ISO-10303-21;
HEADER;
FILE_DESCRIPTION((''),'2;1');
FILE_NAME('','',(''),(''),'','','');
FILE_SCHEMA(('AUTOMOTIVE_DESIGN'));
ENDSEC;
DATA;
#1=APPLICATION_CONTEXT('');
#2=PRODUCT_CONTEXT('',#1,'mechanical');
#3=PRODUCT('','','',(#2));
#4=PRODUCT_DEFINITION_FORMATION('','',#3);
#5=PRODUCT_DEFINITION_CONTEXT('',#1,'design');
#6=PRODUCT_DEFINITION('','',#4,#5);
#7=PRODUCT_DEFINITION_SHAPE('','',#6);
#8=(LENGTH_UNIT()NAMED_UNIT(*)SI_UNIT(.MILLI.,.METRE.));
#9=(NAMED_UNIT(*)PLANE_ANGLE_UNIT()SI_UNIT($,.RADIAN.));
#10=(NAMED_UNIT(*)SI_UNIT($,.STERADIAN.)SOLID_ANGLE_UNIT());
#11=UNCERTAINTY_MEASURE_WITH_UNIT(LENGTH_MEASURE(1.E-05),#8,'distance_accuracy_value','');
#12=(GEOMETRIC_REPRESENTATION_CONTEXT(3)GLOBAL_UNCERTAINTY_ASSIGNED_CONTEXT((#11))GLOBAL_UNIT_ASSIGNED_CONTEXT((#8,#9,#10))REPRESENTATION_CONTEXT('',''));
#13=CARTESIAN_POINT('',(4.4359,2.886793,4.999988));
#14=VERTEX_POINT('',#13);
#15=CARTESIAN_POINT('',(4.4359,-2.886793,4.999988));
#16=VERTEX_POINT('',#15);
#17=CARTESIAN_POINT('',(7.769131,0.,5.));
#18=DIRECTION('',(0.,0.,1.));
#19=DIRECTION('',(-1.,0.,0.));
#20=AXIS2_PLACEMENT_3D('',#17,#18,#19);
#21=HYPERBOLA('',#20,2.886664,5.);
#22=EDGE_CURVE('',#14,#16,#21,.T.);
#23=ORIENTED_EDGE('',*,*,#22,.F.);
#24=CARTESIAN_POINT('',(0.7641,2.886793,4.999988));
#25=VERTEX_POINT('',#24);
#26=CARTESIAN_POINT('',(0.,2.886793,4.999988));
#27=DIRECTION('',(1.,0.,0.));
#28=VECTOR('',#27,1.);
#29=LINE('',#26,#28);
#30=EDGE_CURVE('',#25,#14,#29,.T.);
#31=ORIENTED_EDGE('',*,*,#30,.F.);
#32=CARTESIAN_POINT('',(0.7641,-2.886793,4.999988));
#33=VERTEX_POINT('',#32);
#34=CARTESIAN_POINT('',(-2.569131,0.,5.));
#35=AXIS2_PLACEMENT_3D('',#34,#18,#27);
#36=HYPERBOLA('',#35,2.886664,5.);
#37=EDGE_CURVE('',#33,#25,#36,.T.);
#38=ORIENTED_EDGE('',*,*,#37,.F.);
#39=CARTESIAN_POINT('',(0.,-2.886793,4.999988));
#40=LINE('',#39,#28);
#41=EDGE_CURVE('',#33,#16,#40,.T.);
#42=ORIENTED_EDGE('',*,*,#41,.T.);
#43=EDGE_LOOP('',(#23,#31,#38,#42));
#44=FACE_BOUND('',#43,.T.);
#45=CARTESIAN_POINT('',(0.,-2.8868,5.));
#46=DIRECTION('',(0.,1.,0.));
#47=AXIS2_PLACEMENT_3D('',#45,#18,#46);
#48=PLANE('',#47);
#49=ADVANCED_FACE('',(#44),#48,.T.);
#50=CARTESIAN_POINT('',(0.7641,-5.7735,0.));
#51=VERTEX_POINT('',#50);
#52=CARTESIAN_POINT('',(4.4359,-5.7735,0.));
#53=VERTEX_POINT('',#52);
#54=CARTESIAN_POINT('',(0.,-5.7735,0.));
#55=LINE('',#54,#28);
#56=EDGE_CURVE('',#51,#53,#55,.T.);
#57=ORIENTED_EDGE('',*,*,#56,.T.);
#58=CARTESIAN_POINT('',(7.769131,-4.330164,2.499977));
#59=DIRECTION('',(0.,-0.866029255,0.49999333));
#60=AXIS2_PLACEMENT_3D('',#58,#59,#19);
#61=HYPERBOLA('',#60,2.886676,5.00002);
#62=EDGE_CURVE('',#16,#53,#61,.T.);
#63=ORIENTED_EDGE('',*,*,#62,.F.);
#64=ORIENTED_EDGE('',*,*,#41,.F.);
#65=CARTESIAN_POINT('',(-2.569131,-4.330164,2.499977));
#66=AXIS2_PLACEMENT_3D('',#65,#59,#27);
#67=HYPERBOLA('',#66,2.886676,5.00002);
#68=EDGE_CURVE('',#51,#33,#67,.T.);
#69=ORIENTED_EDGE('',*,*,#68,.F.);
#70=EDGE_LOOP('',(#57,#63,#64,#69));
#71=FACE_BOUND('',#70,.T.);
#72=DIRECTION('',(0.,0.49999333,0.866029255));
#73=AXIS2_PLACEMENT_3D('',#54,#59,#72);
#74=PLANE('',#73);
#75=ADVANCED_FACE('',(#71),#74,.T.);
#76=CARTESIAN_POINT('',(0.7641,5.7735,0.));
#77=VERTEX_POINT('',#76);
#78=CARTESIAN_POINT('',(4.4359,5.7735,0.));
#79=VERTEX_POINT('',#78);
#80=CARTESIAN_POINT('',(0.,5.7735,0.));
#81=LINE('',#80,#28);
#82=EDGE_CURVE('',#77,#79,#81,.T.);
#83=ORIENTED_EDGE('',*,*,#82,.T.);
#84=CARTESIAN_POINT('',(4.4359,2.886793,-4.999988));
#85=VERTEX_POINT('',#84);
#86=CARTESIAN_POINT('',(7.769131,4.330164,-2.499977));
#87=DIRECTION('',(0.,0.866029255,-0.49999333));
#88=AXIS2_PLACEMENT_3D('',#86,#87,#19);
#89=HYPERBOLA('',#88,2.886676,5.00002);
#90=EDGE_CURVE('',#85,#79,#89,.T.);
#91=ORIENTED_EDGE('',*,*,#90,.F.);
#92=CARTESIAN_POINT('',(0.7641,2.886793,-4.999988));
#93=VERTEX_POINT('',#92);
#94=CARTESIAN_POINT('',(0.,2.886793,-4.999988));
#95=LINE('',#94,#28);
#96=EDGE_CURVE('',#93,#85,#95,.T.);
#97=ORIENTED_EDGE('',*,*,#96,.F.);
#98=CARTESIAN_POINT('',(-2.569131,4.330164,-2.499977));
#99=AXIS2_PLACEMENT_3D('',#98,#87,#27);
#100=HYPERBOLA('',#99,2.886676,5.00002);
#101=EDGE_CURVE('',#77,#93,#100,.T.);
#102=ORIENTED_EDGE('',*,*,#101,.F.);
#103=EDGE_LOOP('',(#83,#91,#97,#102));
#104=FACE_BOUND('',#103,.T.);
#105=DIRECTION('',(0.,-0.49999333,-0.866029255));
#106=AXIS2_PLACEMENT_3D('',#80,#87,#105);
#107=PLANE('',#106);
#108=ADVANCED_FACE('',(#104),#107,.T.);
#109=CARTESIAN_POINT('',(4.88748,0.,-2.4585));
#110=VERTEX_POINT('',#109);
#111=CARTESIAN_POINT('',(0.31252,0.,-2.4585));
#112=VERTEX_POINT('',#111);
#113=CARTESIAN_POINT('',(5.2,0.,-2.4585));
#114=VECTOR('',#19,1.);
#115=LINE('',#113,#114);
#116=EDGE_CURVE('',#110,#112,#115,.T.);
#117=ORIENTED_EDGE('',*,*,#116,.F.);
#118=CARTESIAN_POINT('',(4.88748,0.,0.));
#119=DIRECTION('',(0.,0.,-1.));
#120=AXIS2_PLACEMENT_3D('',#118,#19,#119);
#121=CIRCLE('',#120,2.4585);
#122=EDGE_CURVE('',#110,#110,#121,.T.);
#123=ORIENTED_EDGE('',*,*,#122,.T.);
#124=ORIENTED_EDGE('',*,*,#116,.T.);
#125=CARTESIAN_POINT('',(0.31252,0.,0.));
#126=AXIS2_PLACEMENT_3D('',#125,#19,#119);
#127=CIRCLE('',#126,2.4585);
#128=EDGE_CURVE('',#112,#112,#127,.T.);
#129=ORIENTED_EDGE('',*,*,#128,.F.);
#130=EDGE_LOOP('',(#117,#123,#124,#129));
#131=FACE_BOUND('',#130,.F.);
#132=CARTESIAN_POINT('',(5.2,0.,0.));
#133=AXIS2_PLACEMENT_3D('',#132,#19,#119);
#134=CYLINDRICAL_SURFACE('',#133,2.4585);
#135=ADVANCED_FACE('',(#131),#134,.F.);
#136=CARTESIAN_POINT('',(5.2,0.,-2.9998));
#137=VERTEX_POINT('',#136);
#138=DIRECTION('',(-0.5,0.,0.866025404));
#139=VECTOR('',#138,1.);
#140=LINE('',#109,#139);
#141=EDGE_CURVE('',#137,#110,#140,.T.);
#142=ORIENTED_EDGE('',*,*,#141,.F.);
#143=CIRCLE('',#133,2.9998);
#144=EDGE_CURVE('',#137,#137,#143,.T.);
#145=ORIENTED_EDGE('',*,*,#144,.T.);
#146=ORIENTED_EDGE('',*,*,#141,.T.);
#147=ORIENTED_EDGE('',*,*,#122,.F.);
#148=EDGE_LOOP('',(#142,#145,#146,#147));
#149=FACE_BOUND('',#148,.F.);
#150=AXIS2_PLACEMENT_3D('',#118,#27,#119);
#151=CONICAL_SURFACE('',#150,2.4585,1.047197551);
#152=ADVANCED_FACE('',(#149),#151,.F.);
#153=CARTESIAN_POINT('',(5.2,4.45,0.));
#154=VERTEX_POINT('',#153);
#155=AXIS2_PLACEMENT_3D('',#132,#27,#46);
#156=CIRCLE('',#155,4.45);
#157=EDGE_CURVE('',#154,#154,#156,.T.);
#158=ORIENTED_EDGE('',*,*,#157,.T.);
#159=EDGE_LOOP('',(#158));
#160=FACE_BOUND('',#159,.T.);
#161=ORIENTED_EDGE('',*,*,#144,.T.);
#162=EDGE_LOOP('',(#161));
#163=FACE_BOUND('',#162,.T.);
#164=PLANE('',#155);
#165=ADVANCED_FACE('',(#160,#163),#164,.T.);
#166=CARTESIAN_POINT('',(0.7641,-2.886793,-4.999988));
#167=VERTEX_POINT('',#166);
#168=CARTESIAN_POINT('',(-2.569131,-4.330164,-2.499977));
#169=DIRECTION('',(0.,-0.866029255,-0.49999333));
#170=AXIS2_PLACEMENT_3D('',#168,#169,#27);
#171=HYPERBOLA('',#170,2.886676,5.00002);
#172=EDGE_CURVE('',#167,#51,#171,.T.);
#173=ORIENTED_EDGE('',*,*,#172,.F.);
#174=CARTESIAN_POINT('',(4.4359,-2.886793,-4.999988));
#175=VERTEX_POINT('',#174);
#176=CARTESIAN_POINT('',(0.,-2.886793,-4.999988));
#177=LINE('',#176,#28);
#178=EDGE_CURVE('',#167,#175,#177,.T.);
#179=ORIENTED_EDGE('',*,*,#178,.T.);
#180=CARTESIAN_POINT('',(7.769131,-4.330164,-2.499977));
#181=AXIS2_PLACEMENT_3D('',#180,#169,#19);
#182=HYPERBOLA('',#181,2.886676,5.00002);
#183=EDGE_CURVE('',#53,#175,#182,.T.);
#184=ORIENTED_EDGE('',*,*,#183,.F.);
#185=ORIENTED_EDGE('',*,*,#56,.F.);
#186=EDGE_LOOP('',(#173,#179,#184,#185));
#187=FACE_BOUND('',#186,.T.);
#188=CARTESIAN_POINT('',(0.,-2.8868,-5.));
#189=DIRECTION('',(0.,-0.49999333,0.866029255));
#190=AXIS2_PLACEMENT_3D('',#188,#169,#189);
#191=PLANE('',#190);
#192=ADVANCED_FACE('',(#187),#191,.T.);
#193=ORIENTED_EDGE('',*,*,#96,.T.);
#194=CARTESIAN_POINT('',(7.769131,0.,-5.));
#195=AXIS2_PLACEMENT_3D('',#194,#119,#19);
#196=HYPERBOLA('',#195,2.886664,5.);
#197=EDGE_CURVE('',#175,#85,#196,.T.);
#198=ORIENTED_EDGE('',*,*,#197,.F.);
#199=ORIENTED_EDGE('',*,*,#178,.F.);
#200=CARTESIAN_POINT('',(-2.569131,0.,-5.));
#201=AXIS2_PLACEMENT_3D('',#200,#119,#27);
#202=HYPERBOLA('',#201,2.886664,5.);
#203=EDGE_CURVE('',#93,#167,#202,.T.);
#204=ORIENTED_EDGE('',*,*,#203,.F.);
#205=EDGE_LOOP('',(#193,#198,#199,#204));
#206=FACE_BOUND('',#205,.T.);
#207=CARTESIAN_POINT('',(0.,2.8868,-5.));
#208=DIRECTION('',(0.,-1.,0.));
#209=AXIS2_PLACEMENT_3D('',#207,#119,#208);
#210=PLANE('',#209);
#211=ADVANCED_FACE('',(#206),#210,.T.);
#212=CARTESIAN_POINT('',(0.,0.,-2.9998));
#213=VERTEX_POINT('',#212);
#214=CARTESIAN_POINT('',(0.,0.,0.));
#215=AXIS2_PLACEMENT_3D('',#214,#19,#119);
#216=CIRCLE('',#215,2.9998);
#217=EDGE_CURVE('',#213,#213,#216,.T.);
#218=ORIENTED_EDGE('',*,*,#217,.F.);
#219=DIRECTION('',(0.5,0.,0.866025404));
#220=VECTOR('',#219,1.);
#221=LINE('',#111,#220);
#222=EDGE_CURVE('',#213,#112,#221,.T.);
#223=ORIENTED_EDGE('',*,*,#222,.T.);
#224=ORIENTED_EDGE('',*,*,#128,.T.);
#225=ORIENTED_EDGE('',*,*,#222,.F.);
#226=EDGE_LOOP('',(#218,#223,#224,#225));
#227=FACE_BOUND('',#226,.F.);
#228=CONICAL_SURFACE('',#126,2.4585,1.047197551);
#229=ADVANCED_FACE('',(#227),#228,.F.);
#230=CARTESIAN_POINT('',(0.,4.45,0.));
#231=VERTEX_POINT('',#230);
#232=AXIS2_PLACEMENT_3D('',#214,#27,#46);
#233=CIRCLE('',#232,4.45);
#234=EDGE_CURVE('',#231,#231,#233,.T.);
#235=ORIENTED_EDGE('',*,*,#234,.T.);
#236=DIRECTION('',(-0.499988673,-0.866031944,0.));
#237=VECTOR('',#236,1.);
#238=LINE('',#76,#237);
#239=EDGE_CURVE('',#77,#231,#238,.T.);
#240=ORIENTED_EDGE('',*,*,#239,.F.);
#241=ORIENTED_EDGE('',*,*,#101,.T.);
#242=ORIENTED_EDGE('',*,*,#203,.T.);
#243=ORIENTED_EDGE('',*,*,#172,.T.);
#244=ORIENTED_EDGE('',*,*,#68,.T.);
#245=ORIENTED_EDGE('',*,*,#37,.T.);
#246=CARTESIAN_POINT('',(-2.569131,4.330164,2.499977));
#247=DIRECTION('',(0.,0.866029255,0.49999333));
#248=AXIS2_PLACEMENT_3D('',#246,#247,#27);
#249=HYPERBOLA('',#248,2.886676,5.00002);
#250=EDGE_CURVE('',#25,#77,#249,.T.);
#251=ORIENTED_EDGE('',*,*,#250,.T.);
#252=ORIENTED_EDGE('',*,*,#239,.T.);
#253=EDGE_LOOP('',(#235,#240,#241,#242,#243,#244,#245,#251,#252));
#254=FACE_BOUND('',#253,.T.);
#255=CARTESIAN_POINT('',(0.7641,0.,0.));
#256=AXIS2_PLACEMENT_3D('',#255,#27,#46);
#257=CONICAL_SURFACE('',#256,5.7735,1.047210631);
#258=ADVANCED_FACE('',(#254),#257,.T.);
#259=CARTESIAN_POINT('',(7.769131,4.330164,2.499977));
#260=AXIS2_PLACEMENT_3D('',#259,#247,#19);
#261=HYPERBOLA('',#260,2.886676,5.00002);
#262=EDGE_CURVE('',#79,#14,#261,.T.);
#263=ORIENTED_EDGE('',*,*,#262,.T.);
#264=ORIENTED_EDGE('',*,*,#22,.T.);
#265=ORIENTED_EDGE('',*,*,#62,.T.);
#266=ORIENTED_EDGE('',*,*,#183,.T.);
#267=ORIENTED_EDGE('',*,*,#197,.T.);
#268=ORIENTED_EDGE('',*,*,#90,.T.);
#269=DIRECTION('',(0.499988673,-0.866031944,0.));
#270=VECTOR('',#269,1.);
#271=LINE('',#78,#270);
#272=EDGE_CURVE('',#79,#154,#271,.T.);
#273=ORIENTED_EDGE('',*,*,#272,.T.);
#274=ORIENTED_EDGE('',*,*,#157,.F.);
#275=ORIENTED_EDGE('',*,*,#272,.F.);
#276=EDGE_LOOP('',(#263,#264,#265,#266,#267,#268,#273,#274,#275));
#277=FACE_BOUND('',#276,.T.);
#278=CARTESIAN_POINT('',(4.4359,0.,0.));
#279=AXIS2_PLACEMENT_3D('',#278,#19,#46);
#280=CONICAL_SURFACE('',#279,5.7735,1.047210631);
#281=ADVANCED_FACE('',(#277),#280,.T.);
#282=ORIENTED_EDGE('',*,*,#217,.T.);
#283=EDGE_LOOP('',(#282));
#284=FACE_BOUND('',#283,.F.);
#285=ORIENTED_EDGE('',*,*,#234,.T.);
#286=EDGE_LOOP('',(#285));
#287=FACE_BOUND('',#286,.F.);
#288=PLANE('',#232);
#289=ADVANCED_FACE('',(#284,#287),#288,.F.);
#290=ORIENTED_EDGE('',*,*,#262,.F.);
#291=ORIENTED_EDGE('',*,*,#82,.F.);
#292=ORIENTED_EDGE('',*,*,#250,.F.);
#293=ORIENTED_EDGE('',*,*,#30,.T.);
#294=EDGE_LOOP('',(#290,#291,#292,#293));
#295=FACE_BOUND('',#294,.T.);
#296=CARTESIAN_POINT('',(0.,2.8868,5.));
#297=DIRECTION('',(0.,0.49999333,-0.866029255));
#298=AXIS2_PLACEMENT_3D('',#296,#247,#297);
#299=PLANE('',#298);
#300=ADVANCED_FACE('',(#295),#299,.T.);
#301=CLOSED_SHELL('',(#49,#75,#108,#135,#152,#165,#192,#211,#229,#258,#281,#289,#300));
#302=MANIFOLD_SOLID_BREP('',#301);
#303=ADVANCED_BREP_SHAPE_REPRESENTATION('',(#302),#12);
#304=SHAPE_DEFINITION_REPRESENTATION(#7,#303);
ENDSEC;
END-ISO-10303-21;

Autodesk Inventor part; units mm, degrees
ref_plane "YZ Plane" through (0, 0, 0) normal (1, 0, 0) x (0, 1, 0)
ref_plane "XZ Plane" through (0, 0, 0) normal (0, 1, 0) x (-1, 0, 0)
sketch "Boceto1" plane through (0, 0, 0) normal (1, 0, 0) x (0, 1, 0)
  line L0 (-5.7735, 0) -> (-2.8868, 5)
  line L1 (-2.8868, 5) -> (2.8868, 5)
  line L2 (2.8868, 5) -> (5.7735, 0)
  line L3 (5.7735, 0) -> (2.8868, -5)
  line L4 (2.8868, -5) -> (-2.8868, -5)
  line L5 (-2.8868, -5) -> (-5.7735, 0)
  point P0 (0, 0)
  point P1 (0, 0)
  dimension "d0" = 11.547
extrude "Cuerpo" add sketch "Boceto1" along normal blind 5.2
sketch "Boceto2" plane through (0, 0, 0) normal (0, 0, 1) x (1, 0, 0)
  line L0 (0, 2.8868) -> (0, 5.7735) projected
  line L1 (0, 5.7735) -> (5.2, 5.7735) projected
  line L2 (5.2, 2.8868) -> (5.2, 5.7735) projected
  line L3 (-1.04, 0) -> (6.24, 0) projected
  line L4 (0.7641, 5.7735) -> (0, 4.45)
  line L5 (4.4359, 5.7735) -> (5.2, 4.45)
  dimension "d3" = 30
  dimension "d4" = 30
  dimension "d5" = 8.9
  dimension "d6" = 8.9
revolve "Chaflán1" cut sketch "Boceto2" angle 360 about axis through (-10, 0, 0) along (1, 0, 0)
sketch "Boceto3" plane through (5.2, 0, 0) normal (1, 0, 0) x (0, 0, -1)
  arc A0 (-0.625, -1.0825) -> (0.625, -1.0825) centre (0, 0) ccw projected
hole "Rosca" at (5.2, 0, 0) direction (-1, 0, 0) diameter 4.917 end through all thread size "M6x1" class "6H" standard "ISO Metric profile"
chamfer "Chaflán2" distance 0.5413 angle 30 1 edges at (5.2, 0, 2.4585) measured on face at (5.2, 3.7371, -0.4538)
chamfer "Chaflán3" distance 0.5413 angle 30 1 edges at (0, 0, 2.4585) measured on face at (0, 3.7371, -0.4538)
ref_plane "Work Plane1" through (-10.9812, 0, 0) normal (0, -0.8660254, -0.5) x (1, 0, 0)
equation "\"d0\" = 1.1547 * SW"
equation "\"d1\" = KOH"
equation "\"d8\" = -0.5 * GD1 + 0.5 * NND"
equation "\"d40\" = -0.5 * GD1 + 0.5 * NND"
equation "\"d10\" = -0.5 * GD1 + 0.5 * NND"
equation "\"d41\" = -0.5 * GD1 + 0.5 * NND"
equation "\"d3\" = ANG1"
equation "\"d4\" = ANG2"
equation "\"d5\" = SW0"
equation "\"d6\" = SW01"
equation "\"ANG1\" = 30deg"
equation "\"ANG2\" = 30deg"
equation "\"NND\" = 6"
equation "\"KOH\" = 5.2"
equation "\"SW0\" = 8.9"
equation "\"SW01\" = SW0"
equation "\"GUL\" = 0.541266 * PTC"
equation "\"THREADDIA\" = 6"
equation "\"TOA\" = 30deg"
equation "\"PTC\" = 1"
equation "\"E0\" = 1.155 * SW"
equation "\"GAL\" = 0.541266 * PTC"
equation "\"SW\" = 10"
equation "\"GD1\" = 4.917468"
properties part number "ISO 4032 - M6" material "Acero inoxidable, 440C"
